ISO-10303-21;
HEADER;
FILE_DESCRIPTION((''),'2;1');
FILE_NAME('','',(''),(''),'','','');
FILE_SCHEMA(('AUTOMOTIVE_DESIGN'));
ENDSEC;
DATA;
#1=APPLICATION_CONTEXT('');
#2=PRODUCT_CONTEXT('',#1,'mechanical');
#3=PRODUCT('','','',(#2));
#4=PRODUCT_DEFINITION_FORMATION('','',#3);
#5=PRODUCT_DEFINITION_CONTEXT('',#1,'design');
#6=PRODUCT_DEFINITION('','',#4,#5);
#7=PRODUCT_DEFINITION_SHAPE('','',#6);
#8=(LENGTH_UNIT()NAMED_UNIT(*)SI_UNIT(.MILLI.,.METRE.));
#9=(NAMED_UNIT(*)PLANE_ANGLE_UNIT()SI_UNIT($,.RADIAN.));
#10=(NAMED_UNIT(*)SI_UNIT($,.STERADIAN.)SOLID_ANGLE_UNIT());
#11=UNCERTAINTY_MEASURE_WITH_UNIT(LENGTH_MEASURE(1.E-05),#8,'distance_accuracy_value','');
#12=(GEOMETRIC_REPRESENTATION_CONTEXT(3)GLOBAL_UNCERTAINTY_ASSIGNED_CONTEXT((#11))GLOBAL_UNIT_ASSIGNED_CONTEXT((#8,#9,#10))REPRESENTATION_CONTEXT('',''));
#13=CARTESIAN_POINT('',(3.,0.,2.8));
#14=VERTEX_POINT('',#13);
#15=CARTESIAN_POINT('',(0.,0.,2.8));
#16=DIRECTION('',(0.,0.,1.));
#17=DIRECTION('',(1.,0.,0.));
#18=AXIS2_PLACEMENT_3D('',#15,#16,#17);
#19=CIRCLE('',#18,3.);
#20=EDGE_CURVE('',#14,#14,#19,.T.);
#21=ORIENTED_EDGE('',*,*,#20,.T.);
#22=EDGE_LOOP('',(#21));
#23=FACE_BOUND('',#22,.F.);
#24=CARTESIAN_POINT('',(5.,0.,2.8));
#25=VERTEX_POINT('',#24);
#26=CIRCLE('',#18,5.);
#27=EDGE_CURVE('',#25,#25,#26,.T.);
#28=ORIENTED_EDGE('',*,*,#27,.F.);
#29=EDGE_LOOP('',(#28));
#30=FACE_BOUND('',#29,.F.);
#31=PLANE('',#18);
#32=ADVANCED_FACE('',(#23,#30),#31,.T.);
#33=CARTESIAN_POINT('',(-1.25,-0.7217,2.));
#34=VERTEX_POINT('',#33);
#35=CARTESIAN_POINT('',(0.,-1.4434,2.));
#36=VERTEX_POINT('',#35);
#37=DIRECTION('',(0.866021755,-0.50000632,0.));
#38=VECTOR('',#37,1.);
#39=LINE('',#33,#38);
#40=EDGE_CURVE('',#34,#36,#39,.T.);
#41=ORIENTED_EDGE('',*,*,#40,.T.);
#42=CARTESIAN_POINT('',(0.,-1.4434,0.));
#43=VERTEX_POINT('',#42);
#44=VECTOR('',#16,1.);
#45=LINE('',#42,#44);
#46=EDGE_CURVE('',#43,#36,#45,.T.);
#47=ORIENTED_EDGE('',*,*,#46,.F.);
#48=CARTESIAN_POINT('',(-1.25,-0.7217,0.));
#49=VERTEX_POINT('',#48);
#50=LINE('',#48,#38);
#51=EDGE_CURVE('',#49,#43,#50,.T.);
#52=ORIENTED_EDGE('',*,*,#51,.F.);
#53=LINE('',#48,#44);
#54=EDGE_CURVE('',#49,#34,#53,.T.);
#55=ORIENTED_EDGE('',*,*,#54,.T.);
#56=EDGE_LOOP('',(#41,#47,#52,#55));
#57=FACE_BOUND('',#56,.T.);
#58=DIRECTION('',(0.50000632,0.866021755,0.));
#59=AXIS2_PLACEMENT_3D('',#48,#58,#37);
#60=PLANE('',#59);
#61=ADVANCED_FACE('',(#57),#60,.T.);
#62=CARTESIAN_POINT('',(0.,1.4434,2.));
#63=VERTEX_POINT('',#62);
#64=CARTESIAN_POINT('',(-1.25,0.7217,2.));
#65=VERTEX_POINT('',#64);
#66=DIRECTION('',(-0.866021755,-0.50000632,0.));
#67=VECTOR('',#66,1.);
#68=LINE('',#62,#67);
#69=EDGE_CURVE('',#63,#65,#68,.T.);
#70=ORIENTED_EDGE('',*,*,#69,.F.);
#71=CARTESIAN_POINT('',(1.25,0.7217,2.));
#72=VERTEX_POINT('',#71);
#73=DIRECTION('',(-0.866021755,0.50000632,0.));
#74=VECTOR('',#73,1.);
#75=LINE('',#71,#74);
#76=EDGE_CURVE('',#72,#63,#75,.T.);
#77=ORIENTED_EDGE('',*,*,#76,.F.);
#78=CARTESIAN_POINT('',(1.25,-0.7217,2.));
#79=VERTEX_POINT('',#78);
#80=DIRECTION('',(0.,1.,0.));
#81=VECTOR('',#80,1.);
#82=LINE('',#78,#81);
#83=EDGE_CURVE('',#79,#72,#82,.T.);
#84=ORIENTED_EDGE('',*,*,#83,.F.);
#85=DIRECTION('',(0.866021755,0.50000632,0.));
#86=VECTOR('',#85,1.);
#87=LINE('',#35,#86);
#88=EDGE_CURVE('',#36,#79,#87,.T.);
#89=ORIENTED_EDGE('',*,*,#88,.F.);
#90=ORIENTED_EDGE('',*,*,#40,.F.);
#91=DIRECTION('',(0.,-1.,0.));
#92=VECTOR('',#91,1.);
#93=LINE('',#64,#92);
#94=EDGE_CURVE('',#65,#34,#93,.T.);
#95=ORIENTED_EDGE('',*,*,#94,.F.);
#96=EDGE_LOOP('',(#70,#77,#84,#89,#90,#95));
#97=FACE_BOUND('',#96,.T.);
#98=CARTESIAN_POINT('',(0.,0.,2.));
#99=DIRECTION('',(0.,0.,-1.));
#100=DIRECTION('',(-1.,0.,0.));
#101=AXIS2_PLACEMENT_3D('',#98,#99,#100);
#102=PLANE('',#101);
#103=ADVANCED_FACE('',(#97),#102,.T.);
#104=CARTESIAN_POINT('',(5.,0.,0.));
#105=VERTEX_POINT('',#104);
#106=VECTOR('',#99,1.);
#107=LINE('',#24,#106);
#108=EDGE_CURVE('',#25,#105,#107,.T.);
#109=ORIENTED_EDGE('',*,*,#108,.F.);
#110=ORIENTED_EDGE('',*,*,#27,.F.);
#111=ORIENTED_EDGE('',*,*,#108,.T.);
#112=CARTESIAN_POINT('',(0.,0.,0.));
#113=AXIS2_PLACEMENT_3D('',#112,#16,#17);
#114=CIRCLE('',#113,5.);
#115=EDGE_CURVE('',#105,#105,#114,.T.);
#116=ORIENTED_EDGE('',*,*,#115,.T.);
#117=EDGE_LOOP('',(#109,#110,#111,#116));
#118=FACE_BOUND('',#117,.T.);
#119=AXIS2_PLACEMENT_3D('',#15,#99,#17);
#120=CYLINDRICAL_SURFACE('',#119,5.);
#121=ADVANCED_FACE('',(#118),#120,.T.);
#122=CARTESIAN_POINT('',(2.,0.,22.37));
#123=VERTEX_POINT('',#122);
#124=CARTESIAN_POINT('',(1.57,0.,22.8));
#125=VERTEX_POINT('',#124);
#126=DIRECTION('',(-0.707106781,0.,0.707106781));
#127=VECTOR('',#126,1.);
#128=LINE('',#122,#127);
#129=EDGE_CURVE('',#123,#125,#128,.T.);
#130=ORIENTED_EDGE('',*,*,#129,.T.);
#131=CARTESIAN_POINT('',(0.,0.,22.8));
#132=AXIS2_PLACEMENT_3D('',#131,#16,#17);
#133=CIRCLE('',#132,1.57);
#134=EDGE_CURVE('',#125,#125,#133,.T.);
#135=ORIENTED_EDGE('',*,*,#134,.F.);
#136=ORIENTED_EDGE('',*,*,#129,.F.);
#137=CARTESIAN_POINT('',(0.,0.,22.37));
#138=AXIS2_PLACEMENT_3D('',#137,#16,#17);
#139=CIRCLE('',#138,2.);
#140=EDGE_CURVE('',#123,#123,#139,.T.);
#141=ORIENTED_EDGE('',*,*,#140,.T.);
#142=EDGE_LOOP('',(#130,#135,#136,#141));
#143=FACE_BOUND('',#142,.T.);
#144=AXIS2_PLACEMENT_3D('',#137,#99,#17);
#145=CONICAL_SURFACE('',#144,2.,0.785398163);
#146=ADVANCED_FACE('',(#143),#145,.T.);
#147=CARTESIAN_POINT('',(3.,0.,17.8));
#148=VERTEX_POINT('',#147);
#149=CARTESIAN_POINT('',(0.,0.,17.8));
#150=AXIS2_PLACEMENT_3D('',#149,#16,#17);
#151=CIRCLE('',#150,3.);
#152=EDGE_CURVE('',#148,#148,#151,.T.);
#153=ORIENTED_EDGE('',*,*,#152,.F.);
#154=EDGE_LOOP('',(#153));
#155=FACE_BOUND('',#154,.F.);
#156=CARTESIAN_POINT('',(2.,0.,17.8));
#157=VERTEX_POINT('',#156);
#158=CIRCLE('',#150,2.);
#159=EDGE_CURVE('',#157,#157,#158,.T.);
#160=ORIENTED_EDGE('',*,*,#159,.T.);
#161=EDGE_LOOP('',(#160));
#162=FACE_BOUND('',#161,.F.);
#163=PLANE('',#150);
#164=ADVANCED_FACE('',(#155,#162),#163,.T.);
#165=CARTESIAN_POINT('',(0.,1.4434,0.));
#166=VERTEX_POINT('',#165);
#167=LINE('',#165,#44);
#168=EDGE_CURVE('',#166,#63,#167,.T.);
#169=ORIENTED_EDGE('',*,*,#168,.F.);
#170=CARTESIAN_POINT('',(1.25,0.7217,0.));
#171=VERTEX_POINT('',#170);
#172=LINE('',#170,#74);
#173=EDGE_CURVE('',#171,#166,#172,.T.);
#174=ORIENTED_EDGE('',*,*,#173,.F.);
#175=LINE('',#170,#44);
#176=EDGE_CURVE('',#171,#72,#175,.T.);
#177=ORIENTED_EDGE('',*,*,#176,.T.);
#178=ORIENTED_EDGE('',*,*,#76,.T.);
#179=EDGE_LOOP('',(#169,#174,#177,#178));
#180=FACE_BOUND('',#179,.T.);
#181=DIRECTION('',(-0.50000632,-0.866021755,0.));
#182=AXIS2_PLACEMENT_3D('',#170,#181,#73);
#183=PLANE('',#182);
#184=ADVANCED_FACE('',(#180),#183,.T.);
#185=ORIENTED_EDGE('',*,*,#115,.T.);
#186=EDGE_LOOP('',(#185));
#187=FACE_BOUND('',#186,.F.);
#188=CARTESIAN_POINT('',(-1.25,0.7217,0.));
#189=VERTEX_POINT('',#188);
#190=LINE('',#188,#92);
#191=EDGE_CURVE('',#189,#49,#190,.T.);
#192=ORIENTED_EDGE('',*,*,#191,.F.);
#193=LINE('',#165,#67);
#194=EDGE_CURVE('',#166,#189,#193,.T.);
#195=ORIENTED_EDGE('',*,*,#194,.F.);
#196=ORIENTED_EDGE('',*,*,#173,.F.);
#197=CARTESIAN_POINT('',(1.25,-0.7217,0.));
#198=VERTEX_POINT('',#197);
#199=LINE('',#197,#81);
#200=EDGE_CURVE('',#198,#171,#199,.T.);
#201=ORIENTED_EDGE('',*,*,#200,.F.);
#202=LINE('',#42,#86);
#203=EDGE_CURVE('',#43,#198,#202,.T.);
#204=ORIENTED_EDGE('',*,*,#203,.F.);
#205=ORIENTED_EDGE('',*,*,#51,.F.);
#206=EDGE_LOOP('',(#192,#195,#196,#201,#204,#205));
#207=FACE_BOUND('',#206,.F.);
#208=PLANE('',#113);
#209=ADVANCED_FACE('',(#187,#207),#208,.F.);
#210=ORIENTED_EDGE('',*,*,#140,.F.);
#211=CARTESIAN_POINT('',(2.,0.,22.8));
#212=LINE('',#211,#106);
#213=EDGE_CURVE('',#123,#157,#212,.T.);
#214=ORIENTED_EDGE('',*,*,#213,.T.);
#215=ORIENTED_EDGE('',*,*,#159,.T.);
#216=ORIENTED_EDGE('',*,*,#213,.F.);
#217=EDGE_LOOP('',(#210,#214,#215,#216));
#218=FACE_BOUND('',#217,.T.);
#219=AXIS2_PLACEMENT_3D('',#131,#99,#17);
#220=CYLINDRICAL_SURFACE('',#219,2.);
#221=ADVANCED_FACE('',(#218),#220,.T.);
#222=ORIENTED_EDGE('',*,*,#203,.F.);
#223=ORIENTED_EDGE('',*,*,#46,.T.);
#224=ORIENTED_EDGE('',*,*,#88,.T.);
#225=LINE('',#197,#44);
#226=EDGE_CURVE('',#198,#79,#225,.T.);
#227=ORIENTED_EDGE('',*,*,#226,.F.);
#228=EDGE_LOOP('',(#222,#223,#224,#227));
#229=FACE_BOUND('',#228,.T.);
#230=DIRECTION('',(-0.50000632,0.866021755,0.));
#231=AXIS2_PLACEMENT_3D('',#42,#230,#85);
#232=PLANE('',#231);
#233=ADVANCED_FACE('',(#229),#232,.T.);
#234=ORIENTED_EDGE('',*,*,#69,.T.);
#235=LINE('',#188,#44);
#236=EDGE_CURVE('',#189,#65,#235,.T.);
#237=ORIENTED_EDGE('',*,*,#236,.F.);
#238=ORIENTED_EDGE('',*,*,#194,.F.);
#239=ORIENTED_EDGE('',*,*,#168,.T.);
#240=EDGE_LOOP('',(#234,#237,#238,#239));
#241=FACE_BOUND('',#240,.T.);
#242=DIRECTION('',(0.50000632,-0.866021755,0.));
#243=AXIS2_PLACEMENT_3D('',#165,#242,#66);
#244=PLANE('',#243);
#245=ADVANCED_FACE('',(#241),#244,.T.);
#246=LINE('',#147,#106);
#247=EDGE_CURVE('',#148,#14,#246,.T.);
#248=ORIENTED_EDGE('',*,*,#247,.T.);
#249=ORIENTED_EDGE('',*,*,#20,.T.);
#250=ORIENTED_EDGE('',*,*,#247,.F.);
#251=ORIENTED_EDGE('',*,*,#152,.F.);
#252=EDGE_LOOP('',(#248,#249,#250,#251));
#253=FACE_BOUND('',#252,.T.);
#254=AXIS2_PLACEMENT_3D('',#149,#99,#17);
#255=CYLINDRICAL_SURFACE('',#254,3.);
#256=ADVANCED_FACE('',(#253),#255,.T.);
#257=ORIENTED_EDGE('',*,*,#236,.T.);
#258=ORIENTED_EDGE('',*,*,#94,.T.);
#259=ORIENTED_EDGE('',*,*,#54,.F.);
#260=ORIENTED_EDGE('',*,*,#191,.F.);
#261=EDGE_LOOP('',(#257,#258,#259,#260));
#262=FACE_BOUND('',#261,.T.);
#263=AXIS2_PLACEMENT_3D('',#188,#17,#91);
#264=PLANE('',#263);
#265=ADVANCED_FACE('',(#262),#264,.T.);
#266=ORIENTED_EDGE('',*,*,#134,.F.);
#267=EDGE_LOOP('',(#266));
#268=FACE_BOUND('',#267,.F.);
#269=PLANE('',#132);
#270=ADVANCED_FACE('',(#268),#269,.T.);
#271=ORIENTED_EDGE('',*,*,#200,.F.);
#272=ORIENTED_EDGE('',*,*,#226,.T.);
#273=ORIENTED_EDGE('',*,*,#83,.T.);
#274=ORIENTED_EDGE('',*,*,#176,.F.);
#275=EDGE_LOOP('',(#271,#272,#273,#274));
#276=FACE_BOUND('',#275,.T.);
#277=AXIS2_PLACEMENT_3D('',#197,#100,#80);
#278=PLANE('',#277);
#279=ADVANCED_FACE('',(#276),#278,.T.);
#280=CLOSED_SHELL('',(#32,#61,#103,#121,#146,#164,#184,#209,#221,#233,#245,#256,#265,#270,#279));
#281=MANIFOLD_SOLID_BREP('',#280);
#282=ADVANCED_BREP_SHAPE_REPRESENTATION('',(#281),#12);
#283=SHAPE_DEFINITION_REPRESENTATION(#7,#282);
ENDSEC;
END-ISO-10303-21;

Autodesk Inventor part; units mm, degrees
ref_plane "YZ Plane" through (0, 0, 0) normal (1, 0, 0) x (0, 1, 0)
ref_plane "XZ Plane" through (0, 0, 0) normal (0, 1, 0) x (-1, 0, 0)
ref_plane "XY Plane" through (0, 0, 0) normal (0, 0, 1) x (1, 0, 0)
sketch "Sketch1" plane through (0, 0, 0) normal (0, 1, 0) x (-1, 0, 0)
  line L0 (0, 0) -> (0, 22.8)
  line L1 (0, 22.8) -> (-2, 22.8)
  line L2 (-2, 22.8) -> (-2, 17.8)
  line L3 (-2, 17.8) -> (-3, 17.8)
  line L4 (-3, 17.8) -> (-3, 2.8)
  line L5 (-3, 2.8) -> (-5, 2.8)
  line L6 (-5, 2.8) -> (-5, 0)
  line L7 (-5, 0) -> (0, 0)
  dimension "d0" = 10
  dimension "d1" = 6
  dimension "d2" = 4
  dimension "d3" = 5
  dimension "d4" = 15
  dimension "d5" = 2.8
revolve "Revolution1" add sketch "Sketch1" angle 360 about axis through (0, 0, 0) along (0, 0, 1)
thread "Thread1" size "M4x0.7" class "6g" standard "ANSI Metric M Profile" length 6 offset 1.2
sketch "Sketch2" plane through (0, 0, 0) normal (0, 0, -1) x (-1, 0, 0)
  line L0 (0, 1.4434) -> (1.25, 0.7217)
  line L1 (1.25, 0.7217) -> (1.25, -0.7217)
  line L2 (1.25, -0.7217) -> (0, -1.4434)
  line L3 (0, -1.4434) -> (-1.25, -0.7217)
  line L4 (-1.25, -0.7217) -> (-1.25, 0.7217)
  line L5 (-1.25, 0.7217) -> (0, 1.4434)
  point P0 (0, 0)
  point P1 (0, 0)
  dimension "d9" = 2.5
extrude "Extrusion1" cut sketch "Sketch2" against normal blind 2
chamfer "Chamfer1" distance 0.43 angle 45 1 edges at (-2, 0, 22.8)
properties part number "DBTSY4-15-5-DHC" material "Stainless Steel AISI 304"
